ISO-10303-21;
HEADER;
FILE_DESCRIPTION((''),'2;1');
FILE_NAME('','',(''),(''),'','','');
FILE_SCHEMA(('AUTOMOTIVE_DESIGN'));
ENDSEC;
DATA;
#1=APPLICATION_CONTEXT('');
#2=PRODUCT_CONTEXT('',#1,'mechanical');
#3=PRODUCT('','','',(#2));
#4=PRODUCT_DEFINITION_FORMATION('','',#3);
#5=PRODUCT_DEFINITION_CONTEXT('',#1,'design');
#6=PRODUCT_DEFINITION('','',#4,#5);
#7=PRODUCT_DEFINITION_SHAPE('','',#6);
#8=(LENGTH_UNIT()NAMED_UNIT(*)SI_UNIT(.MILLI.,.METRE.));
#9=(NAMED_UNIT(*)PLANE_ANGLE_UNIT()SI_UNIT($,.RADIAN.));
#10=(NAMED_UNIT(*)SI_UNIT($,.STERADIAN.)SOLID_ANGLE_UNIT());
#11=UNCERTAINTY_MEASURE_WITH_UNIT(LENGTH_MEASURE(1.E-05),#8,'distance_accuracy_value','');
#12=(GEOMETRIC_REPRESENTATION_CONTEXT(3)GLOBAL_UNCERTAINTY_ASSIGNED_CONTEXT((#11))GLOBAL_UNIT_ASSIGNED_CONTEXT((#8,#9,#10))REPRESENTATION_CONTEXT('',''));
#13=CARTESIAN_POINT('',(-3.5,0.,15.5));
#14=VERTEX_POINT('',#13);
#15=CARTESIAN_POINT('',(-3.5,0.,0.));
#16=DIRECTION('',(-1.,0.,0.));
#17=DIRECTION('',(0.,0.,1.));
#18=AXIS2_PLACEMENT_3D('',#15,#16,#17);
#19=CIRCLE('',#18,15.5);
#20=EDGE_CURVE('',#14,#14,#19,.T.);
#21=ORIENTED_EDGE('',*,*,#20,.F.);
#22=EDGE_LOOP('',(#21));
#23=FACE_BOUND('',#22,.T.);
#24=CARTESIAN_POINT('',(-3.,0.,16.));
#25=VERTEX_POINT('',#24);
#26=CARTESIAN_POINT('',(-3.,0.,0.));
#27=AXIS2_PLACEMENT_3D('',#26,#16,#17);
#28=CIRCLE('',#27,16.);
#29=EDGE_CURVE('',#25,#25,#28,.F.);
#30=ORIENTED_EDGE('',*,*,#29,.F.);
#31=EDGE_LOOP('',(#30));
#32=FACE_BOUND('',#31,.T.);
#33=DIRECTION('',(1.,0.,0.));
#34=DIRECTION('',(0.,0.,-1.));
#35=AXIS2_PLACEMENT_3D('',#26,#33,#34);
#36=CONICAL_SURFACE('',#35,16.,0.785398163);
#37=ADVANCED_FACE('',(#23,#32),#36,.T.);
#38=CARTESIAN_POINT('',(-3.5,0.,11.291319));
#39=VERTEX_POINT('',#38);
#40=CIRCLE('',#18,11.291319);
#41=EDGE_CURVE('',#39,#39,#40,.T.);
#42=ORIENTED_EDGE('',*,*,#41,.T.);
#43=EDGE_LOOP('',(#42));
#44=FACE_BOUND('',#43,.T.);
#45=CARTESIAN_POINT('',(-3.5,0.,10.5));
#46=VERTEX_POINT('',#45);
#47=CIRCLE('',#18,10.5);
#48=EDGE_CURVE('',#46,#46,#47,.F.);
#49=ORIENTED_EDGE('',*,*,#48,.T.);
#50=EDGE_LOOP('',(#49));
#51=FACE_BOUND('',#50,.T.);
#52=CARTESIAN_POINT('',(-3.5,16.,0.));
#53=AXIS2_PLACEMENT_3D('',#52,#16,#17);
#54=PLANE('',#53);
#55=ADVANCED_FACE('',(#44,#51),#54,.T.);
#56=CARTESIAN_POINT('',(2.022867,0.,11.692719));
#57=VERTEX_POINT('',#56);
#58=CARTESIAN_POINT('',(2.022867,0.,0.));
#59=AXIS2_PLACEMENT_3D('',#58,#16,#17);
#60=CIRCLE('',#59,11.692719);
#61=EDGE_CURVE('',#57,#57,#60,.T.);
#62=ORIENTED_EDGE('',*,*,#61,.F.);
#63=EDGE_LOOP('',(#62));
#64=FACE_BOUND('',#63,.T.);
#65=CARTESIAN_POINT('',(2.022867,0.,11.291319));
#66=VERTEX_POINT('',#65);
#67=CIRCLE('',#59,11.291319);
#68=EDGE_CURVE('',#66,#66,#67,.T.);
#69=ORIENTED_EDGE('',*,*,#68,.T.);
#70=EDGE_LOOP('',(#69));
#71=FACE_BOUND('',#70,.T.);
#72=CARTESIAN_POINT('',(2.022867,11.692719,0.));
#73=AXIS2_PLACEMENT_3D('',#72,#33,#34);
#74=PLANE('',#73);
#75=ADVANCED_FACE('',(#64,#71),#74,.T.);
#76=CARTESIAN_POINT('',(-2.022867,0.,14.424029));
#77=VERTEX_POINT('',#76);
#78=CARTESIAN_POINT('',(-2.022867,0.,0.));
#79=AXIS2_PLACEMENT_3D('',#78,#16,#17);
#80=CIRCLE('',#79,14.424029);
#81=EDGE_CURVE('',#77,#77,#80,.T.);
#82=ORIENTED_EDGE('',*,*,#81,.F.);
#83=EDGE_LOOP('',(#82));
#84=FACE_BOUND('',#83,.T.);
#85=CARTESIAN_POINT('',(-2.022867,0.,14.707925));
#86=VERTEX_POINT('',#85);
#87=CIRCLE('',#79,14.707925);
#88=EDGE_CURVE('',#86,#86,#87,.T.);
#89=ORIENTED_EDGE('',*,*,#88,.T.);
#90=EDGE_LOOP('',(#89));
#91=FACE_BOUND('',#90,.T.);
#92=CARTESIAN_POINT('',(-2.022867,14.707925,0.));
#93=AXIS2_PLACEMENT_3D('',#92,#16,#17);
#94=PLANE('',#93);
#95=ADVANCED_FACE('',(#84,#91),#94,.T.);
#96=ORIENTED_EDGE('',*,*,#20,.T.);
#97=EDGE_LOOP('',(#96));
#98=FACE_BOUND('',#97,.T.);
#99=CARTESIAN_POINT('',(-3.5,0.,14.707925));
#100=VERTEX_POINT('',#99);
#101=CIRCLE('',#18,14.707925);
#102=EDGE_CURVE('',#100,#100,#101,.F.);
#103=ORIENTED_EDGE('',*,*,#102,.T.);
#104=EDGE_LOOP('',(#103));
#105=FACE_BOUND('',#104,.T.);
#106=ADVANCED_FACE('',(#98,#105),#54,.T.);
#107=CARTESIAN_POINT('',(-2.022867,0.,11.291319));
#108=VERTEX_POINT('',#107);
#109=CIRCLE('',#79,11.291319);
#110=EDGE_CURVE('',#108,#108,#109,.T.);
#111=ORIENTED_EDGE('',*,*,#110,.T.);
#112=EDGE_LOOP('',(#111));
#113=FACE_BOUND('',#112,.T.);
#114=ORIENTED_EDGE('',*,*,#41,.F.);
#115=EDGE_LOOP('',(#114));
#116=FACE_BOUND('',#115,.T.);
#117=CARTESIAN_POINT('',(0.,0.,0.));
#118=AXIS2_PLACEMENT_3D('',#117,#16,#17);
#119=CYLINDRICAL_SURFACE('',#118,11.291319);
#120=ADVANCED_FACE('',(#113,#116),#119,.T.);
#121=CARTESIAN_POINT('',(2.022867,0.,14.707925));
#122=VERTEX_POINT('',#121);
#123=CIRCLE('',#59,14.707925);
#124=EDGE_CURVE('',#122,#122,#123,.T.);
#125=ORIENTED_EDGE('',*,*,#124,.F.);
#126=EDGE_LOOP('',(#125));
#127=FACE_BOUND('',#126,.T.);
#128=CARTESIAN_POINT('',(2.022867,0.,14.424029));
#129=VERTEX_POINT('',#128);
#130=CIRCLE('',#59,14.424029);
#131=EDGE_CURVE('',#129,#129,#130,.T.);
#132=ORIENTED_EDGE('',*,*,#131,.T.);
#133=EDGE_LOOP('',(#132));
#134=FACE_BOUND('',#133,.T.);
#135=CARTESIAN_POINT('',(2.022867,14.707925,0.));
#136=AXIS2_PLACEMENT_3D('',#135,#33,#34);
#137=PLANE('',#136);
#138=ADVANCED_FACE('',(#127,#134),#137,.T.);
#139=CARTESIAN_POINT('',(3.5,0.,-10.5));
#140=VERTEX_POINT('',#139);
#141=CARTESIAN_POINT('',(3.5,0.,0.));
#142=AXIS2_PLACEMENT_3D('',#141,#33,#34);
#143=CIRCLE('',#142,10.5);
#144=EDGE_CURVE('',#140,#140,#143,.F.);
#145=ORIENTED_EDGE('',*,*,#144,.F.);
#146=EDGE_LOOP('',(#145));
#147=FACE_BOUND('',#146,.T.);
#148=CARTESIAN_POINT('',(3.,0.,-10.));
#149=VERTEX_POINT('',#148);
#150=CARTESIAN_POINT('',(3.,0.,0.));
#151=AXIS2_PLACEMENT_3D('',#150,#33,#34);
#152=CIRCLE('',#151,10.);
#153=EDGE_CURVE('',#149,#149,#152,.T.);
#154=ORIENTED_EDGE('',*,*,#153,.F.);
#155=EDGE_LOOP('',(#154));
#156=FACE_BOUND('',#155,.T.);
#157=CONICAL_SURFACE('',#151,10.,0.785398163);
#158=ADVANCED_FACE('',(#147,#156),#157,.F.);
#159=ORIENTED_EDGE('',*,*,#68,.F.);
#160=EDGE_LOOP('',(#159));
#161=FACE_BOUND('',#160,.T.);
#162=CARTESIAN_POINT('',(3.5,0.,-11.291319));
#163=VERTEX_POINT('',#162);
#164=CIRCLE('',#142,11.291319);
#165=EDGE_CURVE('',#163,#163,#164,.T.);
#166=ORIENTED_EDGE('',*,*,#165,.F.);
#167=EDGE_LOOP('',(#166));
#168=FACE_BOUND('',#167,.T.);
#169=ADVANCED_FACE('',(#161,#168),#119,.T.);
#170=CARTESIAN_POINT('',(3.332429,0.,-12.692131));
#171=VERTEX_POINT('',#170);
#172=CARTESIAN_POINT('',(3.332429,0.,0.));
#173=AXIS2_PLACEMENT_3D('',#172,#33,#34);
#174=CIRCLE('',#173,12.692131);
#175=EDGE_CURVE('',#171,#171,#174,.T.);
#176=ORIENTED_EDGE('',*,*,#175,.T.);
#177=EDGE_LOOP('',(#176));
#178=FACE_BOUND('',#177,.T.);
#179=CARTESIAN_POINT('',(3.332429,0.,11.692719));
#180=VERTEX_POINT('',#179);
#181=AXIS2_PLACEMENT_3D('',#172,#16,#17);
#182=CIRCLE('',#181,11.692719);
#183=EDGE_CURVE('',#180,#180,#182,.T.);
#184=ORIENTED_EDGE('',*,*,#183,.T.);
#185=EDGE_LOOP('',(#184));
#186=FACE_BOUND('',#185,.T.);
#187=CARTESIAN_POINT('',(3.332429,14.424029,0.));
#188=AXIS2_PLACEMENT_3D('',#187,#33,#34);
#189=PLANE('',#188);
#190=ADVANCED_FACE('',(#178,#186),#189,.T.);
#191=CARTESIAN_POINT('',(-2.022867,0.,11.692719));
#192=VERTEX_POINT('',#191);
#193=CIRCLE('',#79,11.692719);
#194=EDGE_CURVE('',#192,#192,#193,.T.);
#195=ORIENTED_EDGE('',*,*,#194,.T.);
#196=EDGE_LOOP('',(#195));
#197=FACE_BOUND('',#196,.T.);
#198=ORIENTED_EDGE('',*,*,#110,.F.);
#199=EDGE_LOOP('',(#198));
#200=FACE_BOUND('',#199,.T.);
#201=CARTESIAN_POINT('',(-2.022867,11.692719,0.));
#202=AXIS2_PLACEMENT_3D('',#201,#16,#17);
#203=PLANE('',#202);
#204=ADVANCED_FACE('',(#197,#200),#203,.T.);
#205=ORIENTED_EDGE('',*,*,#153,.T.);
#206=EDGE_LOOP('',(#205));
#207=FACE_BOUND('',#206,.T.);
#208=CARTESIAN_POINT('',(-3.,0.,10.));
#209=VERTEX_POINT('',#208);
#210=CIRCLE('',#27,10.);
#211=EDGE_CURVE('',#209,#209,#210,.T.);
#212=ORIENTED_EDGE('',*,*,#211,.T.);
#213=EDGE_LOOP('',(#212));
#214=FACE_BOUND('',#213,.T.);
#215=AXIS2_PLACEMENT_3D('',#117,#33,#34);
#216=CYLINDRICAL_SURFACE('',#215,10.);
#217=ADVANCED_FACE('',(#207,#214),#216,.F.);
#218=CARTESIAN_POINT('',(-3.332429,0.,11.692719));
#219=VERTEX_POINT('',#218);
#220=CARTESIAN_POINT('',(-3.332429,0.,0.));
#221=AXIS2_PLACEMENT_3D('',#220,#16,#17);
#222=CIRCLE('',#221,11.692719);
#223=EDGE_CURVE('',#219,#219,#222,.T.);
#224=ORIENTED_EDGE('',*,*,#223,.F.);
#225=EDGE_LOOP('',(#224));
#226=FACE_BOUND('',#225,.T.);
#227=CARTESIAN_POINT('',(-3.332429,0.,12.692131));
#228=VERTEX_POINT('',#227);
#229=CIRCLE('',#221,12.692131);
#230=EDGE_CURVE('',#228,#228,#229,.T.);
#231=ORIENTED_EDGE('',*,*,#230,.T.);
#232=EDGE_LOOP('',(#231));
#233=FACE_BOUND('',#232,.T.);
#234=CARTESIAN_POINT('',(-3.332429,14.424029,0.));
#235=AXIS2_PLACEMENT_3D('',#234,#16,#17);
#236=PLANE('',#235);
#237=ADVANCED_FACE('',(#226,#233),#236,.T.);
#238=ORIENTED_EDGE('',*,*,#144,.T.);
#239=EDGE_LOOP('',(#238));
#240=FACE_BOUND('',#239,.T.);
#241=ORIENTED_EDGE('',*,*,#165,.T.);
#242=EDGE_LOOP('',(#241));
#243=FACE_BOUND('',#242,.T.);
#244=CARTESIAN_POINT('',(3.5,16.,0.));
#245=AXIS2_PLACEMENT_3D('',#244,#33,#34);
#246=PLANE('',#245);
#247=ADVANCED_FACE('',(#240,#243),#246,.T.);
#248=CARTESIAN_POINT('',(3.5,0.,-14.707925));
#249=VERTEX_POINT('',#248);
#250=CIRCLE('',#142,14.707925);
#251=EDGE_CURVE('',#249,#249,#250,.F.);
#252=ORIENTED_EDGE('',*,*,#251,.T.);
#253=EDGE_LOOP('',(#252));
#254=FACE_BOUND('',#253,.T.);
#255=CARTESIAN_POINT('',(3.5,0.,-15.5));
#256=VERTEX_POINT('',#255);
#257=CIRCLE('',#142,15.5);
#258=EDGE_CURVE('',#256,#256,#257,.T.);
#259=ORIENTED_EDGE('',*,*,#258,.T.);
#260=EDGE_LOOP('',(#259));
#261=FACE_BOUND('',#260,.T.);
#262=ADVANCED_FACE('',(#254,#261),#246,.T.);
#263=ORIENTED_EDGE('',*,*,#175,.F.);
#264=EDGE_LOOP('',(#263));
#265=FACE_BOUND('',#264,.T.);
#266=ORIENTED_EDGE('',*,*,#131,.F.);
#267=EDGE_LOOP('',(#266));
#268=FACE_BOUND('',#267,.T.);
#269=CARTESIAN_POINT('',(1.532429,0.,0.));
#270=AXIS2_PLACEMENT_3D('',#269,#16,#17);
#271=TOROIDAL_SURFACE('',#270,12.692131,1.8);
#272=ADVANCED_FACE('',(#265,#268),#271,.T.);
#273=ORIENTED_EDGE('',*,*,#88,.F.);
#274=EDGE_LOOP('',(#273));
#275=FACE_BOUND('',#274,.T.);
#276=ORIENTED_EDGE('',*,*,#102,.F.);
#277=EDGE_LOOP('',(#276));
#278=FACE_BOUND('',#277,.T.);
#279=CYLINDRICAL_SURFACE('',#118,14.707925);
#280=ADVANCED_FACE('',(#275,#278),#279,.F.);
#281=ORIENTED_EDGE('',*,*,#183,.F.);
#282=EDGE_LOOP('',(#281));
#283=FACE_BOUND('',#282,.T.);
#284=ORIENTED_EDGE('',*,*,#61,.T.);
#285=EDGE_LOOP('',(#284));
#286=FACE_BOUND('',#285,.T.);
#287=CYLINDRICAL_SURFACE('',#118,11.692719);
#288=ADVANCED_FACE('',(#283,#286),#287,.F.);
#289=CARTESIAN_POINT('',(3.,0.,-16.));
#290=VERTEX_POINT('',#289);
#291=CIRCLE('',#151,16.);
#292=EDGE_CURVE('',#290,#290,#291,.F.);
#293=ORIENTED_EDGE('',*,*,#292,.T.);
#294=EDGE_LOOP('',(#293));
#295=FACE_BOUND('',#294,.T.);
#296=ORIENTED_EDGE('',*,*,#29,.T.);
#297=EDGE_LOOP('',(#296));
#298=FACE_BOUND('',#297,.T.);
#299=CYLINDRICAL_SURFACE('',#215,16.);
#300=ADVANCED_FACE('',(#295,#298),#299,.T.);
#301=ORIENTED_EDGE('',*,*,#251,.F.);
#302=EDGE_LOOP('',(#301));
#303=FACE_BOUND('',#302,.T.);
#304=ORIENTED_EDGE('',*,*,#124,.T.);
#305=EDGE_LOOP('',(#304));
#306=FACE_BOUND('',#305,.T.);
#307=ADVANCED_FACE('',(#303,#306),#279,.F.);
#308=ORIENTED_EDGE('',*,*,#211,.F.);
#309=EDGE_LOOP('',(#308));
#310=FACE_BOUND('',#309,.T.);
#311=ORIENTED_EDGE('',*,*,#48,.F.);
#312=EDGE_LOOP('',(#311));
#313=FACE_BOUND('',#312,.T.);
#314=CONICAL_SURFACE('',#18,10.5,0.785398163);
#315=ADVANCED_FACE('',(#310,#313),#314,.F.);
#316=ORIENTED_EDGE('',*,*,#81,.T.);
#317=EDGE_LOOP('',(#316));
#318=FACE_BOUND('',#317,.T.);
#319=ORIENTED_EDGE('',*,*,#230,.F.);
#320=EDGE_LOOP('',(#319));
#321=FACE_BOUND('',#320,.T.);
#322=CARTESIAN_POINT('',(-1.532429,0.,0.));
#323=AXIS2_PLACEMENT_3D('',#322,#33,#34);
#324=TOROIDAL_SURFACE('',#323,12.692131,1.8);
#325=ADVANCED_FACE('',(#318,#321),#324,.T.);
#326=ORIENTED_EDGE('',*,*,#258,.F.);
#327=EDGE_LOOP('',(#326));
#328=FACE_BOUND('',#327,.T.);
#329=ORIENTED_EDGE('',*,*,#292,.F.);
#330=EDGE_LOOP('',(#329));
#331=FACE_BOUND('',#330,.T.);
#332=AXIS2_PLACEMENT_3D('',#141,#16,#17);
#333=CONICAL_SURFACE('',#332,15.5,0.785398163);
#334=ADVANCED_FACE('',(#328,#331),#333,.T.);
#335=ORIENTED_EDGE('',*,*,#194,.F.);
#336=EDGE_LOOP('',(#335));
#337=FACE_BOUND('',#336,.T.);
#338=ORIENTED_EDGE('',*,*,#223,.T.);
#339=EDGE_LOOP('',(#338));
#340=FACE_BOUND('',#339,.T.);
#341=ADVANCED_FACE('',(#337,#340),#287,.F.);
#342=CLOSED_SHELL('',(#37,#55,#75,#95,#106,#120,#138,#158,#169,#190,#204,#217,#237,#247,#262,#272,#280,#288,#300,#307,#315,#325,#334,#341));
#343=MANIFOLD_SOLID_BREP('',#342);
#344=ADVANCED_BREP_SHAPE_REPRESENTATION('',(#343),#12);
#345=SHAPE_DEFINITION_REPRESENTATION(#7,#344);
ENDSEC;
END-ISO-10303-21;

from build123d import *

# Parameters (mm, degrees)
SKETCH2_W     = 7
SKETCH2_H     = 6
FILLET1_R     = 1.8
CHAMFER1_SIZE = 0.5


with BuildPart() as part:
    # Sketch2 → Revolve1 (revolve)
    with BuildSketch(Plane.XY, mode=Mode.PRIVATE) as revolve1_sk:
        with Locations((0, 13)):
            Rectangle(SKETCH2_W, SKETCH2_H)
    revolve(revolve1_sk.sketch.rotate(Axis((0, 0, 0), (-1, 0, 0)), 90), axis=Axis((0, 0, 0), (-1, 0, 0)))

    # Sketch4 → Cut-Revolve1 (revolve, cut)
    with BuildSketch(Plane.XY, mode=Mode.PRIVATE) as cut_revolve1_sk:
        Polygon((6.594167107, 14.707924858), (2.022867053, 14.707924858), (2.022867053, 14.424029148), (3.332429366, 14.424029148), (3.332429366, 11.692719364), (2.022867053, 11.692719364), (2.022867053, 11.291318583), (6.594167107, 11.291318583), align=None)
        Polygon((-6.594167107, 11.291318583), (-6.594167107, 14.707924858), (-2.022867053, 14.707924858), (-2.022867053, 14.424029148), (-3.332429366, 14.424029148), (-3.332429366, 11.692719364), (-2.022867053, 11.692719364), (-2.022867053, 11.291318583), align=None)
    revolve(cut_revolve1_sk.sketch.rotate(Axis((0, 0, 0), (1, 0, 0)), 90), axis=Axis((0, 0, 0), (1, 0, 0)), mode=Mode.SUBTRACT)

    # Fillet1
    # the kernel refuses this fillet: 1.8 mm, written as the material it takes off along each edge
    with BuildSketch(Plane(origin=(3.332429366, 0, 0), x_dir=(0, 0, 1), z_dir=(0, 1, 0))) as fillet1_piece_1:
        with BuildLine():
            CenterArc((12.692131092, -1.8), FILLET1_R, 15.811024237, 74.188975763)
            Line((12.692131092, 0), (12.692131092, 0.036))
            Line((12.692131092, 0.036), (14.424029148, 0.036))
            Line((14.424029148, 0.036), (14.460029148, 0))
            ThreePointArc((14.460029148, 0), (14.460029148, -0.654781157), (14.458667109, -1.299753559))
            Line((14.458667109, -1.299753559), (14.424029148, -1.309562313))
        make_face()
    revolve(axis=Axis((3.332429366, 0, 0), (1, 0, 0)), mode=Mode.SUBTRACT)
    with BuildSketch(Plane(origin=(-3.332429366, 0, 0), x_dir=(0, 0, 1), z_dir=(0, 1, 0))) as fillet1_piece_2:
        with BuildLine():
            CenterArc((12.692131092, 1.8), FILLET1_R, 270, 74.188975763)
            Line((12.692131092, 0), (12.692131092, -0.036))
            Line((12.692131092, -0.036), (14.424029148, -0.036))
            Line((14.424029148, -0.036), (14.460029148, 0))
            ThreePointArc((14.460029148, 0), (14.460029148, 0.654781157), (14.458667109, 1.299753559))
            Line((14.458667109, 1.299753559), (14.424029148, 1.309562313))
        make_face()
    revolve(axis=Axis((-3.332429366, 0, 0), (1, 0, 0)), mode=Mode.SUBTRACT)

    # Chamfer1
    chamfer1_edges = [part.edges().sort_by_distance(p)[0] for p in [
        (3.5, 0, 10),
        (-3.5, 0, 10),
        (-3.5, 0, 16),
        (3.5, 0, 16),
    ]]
    chamfer(chamfer1_edges, length=CHAMFER1_SIZE)


solid = part.part
